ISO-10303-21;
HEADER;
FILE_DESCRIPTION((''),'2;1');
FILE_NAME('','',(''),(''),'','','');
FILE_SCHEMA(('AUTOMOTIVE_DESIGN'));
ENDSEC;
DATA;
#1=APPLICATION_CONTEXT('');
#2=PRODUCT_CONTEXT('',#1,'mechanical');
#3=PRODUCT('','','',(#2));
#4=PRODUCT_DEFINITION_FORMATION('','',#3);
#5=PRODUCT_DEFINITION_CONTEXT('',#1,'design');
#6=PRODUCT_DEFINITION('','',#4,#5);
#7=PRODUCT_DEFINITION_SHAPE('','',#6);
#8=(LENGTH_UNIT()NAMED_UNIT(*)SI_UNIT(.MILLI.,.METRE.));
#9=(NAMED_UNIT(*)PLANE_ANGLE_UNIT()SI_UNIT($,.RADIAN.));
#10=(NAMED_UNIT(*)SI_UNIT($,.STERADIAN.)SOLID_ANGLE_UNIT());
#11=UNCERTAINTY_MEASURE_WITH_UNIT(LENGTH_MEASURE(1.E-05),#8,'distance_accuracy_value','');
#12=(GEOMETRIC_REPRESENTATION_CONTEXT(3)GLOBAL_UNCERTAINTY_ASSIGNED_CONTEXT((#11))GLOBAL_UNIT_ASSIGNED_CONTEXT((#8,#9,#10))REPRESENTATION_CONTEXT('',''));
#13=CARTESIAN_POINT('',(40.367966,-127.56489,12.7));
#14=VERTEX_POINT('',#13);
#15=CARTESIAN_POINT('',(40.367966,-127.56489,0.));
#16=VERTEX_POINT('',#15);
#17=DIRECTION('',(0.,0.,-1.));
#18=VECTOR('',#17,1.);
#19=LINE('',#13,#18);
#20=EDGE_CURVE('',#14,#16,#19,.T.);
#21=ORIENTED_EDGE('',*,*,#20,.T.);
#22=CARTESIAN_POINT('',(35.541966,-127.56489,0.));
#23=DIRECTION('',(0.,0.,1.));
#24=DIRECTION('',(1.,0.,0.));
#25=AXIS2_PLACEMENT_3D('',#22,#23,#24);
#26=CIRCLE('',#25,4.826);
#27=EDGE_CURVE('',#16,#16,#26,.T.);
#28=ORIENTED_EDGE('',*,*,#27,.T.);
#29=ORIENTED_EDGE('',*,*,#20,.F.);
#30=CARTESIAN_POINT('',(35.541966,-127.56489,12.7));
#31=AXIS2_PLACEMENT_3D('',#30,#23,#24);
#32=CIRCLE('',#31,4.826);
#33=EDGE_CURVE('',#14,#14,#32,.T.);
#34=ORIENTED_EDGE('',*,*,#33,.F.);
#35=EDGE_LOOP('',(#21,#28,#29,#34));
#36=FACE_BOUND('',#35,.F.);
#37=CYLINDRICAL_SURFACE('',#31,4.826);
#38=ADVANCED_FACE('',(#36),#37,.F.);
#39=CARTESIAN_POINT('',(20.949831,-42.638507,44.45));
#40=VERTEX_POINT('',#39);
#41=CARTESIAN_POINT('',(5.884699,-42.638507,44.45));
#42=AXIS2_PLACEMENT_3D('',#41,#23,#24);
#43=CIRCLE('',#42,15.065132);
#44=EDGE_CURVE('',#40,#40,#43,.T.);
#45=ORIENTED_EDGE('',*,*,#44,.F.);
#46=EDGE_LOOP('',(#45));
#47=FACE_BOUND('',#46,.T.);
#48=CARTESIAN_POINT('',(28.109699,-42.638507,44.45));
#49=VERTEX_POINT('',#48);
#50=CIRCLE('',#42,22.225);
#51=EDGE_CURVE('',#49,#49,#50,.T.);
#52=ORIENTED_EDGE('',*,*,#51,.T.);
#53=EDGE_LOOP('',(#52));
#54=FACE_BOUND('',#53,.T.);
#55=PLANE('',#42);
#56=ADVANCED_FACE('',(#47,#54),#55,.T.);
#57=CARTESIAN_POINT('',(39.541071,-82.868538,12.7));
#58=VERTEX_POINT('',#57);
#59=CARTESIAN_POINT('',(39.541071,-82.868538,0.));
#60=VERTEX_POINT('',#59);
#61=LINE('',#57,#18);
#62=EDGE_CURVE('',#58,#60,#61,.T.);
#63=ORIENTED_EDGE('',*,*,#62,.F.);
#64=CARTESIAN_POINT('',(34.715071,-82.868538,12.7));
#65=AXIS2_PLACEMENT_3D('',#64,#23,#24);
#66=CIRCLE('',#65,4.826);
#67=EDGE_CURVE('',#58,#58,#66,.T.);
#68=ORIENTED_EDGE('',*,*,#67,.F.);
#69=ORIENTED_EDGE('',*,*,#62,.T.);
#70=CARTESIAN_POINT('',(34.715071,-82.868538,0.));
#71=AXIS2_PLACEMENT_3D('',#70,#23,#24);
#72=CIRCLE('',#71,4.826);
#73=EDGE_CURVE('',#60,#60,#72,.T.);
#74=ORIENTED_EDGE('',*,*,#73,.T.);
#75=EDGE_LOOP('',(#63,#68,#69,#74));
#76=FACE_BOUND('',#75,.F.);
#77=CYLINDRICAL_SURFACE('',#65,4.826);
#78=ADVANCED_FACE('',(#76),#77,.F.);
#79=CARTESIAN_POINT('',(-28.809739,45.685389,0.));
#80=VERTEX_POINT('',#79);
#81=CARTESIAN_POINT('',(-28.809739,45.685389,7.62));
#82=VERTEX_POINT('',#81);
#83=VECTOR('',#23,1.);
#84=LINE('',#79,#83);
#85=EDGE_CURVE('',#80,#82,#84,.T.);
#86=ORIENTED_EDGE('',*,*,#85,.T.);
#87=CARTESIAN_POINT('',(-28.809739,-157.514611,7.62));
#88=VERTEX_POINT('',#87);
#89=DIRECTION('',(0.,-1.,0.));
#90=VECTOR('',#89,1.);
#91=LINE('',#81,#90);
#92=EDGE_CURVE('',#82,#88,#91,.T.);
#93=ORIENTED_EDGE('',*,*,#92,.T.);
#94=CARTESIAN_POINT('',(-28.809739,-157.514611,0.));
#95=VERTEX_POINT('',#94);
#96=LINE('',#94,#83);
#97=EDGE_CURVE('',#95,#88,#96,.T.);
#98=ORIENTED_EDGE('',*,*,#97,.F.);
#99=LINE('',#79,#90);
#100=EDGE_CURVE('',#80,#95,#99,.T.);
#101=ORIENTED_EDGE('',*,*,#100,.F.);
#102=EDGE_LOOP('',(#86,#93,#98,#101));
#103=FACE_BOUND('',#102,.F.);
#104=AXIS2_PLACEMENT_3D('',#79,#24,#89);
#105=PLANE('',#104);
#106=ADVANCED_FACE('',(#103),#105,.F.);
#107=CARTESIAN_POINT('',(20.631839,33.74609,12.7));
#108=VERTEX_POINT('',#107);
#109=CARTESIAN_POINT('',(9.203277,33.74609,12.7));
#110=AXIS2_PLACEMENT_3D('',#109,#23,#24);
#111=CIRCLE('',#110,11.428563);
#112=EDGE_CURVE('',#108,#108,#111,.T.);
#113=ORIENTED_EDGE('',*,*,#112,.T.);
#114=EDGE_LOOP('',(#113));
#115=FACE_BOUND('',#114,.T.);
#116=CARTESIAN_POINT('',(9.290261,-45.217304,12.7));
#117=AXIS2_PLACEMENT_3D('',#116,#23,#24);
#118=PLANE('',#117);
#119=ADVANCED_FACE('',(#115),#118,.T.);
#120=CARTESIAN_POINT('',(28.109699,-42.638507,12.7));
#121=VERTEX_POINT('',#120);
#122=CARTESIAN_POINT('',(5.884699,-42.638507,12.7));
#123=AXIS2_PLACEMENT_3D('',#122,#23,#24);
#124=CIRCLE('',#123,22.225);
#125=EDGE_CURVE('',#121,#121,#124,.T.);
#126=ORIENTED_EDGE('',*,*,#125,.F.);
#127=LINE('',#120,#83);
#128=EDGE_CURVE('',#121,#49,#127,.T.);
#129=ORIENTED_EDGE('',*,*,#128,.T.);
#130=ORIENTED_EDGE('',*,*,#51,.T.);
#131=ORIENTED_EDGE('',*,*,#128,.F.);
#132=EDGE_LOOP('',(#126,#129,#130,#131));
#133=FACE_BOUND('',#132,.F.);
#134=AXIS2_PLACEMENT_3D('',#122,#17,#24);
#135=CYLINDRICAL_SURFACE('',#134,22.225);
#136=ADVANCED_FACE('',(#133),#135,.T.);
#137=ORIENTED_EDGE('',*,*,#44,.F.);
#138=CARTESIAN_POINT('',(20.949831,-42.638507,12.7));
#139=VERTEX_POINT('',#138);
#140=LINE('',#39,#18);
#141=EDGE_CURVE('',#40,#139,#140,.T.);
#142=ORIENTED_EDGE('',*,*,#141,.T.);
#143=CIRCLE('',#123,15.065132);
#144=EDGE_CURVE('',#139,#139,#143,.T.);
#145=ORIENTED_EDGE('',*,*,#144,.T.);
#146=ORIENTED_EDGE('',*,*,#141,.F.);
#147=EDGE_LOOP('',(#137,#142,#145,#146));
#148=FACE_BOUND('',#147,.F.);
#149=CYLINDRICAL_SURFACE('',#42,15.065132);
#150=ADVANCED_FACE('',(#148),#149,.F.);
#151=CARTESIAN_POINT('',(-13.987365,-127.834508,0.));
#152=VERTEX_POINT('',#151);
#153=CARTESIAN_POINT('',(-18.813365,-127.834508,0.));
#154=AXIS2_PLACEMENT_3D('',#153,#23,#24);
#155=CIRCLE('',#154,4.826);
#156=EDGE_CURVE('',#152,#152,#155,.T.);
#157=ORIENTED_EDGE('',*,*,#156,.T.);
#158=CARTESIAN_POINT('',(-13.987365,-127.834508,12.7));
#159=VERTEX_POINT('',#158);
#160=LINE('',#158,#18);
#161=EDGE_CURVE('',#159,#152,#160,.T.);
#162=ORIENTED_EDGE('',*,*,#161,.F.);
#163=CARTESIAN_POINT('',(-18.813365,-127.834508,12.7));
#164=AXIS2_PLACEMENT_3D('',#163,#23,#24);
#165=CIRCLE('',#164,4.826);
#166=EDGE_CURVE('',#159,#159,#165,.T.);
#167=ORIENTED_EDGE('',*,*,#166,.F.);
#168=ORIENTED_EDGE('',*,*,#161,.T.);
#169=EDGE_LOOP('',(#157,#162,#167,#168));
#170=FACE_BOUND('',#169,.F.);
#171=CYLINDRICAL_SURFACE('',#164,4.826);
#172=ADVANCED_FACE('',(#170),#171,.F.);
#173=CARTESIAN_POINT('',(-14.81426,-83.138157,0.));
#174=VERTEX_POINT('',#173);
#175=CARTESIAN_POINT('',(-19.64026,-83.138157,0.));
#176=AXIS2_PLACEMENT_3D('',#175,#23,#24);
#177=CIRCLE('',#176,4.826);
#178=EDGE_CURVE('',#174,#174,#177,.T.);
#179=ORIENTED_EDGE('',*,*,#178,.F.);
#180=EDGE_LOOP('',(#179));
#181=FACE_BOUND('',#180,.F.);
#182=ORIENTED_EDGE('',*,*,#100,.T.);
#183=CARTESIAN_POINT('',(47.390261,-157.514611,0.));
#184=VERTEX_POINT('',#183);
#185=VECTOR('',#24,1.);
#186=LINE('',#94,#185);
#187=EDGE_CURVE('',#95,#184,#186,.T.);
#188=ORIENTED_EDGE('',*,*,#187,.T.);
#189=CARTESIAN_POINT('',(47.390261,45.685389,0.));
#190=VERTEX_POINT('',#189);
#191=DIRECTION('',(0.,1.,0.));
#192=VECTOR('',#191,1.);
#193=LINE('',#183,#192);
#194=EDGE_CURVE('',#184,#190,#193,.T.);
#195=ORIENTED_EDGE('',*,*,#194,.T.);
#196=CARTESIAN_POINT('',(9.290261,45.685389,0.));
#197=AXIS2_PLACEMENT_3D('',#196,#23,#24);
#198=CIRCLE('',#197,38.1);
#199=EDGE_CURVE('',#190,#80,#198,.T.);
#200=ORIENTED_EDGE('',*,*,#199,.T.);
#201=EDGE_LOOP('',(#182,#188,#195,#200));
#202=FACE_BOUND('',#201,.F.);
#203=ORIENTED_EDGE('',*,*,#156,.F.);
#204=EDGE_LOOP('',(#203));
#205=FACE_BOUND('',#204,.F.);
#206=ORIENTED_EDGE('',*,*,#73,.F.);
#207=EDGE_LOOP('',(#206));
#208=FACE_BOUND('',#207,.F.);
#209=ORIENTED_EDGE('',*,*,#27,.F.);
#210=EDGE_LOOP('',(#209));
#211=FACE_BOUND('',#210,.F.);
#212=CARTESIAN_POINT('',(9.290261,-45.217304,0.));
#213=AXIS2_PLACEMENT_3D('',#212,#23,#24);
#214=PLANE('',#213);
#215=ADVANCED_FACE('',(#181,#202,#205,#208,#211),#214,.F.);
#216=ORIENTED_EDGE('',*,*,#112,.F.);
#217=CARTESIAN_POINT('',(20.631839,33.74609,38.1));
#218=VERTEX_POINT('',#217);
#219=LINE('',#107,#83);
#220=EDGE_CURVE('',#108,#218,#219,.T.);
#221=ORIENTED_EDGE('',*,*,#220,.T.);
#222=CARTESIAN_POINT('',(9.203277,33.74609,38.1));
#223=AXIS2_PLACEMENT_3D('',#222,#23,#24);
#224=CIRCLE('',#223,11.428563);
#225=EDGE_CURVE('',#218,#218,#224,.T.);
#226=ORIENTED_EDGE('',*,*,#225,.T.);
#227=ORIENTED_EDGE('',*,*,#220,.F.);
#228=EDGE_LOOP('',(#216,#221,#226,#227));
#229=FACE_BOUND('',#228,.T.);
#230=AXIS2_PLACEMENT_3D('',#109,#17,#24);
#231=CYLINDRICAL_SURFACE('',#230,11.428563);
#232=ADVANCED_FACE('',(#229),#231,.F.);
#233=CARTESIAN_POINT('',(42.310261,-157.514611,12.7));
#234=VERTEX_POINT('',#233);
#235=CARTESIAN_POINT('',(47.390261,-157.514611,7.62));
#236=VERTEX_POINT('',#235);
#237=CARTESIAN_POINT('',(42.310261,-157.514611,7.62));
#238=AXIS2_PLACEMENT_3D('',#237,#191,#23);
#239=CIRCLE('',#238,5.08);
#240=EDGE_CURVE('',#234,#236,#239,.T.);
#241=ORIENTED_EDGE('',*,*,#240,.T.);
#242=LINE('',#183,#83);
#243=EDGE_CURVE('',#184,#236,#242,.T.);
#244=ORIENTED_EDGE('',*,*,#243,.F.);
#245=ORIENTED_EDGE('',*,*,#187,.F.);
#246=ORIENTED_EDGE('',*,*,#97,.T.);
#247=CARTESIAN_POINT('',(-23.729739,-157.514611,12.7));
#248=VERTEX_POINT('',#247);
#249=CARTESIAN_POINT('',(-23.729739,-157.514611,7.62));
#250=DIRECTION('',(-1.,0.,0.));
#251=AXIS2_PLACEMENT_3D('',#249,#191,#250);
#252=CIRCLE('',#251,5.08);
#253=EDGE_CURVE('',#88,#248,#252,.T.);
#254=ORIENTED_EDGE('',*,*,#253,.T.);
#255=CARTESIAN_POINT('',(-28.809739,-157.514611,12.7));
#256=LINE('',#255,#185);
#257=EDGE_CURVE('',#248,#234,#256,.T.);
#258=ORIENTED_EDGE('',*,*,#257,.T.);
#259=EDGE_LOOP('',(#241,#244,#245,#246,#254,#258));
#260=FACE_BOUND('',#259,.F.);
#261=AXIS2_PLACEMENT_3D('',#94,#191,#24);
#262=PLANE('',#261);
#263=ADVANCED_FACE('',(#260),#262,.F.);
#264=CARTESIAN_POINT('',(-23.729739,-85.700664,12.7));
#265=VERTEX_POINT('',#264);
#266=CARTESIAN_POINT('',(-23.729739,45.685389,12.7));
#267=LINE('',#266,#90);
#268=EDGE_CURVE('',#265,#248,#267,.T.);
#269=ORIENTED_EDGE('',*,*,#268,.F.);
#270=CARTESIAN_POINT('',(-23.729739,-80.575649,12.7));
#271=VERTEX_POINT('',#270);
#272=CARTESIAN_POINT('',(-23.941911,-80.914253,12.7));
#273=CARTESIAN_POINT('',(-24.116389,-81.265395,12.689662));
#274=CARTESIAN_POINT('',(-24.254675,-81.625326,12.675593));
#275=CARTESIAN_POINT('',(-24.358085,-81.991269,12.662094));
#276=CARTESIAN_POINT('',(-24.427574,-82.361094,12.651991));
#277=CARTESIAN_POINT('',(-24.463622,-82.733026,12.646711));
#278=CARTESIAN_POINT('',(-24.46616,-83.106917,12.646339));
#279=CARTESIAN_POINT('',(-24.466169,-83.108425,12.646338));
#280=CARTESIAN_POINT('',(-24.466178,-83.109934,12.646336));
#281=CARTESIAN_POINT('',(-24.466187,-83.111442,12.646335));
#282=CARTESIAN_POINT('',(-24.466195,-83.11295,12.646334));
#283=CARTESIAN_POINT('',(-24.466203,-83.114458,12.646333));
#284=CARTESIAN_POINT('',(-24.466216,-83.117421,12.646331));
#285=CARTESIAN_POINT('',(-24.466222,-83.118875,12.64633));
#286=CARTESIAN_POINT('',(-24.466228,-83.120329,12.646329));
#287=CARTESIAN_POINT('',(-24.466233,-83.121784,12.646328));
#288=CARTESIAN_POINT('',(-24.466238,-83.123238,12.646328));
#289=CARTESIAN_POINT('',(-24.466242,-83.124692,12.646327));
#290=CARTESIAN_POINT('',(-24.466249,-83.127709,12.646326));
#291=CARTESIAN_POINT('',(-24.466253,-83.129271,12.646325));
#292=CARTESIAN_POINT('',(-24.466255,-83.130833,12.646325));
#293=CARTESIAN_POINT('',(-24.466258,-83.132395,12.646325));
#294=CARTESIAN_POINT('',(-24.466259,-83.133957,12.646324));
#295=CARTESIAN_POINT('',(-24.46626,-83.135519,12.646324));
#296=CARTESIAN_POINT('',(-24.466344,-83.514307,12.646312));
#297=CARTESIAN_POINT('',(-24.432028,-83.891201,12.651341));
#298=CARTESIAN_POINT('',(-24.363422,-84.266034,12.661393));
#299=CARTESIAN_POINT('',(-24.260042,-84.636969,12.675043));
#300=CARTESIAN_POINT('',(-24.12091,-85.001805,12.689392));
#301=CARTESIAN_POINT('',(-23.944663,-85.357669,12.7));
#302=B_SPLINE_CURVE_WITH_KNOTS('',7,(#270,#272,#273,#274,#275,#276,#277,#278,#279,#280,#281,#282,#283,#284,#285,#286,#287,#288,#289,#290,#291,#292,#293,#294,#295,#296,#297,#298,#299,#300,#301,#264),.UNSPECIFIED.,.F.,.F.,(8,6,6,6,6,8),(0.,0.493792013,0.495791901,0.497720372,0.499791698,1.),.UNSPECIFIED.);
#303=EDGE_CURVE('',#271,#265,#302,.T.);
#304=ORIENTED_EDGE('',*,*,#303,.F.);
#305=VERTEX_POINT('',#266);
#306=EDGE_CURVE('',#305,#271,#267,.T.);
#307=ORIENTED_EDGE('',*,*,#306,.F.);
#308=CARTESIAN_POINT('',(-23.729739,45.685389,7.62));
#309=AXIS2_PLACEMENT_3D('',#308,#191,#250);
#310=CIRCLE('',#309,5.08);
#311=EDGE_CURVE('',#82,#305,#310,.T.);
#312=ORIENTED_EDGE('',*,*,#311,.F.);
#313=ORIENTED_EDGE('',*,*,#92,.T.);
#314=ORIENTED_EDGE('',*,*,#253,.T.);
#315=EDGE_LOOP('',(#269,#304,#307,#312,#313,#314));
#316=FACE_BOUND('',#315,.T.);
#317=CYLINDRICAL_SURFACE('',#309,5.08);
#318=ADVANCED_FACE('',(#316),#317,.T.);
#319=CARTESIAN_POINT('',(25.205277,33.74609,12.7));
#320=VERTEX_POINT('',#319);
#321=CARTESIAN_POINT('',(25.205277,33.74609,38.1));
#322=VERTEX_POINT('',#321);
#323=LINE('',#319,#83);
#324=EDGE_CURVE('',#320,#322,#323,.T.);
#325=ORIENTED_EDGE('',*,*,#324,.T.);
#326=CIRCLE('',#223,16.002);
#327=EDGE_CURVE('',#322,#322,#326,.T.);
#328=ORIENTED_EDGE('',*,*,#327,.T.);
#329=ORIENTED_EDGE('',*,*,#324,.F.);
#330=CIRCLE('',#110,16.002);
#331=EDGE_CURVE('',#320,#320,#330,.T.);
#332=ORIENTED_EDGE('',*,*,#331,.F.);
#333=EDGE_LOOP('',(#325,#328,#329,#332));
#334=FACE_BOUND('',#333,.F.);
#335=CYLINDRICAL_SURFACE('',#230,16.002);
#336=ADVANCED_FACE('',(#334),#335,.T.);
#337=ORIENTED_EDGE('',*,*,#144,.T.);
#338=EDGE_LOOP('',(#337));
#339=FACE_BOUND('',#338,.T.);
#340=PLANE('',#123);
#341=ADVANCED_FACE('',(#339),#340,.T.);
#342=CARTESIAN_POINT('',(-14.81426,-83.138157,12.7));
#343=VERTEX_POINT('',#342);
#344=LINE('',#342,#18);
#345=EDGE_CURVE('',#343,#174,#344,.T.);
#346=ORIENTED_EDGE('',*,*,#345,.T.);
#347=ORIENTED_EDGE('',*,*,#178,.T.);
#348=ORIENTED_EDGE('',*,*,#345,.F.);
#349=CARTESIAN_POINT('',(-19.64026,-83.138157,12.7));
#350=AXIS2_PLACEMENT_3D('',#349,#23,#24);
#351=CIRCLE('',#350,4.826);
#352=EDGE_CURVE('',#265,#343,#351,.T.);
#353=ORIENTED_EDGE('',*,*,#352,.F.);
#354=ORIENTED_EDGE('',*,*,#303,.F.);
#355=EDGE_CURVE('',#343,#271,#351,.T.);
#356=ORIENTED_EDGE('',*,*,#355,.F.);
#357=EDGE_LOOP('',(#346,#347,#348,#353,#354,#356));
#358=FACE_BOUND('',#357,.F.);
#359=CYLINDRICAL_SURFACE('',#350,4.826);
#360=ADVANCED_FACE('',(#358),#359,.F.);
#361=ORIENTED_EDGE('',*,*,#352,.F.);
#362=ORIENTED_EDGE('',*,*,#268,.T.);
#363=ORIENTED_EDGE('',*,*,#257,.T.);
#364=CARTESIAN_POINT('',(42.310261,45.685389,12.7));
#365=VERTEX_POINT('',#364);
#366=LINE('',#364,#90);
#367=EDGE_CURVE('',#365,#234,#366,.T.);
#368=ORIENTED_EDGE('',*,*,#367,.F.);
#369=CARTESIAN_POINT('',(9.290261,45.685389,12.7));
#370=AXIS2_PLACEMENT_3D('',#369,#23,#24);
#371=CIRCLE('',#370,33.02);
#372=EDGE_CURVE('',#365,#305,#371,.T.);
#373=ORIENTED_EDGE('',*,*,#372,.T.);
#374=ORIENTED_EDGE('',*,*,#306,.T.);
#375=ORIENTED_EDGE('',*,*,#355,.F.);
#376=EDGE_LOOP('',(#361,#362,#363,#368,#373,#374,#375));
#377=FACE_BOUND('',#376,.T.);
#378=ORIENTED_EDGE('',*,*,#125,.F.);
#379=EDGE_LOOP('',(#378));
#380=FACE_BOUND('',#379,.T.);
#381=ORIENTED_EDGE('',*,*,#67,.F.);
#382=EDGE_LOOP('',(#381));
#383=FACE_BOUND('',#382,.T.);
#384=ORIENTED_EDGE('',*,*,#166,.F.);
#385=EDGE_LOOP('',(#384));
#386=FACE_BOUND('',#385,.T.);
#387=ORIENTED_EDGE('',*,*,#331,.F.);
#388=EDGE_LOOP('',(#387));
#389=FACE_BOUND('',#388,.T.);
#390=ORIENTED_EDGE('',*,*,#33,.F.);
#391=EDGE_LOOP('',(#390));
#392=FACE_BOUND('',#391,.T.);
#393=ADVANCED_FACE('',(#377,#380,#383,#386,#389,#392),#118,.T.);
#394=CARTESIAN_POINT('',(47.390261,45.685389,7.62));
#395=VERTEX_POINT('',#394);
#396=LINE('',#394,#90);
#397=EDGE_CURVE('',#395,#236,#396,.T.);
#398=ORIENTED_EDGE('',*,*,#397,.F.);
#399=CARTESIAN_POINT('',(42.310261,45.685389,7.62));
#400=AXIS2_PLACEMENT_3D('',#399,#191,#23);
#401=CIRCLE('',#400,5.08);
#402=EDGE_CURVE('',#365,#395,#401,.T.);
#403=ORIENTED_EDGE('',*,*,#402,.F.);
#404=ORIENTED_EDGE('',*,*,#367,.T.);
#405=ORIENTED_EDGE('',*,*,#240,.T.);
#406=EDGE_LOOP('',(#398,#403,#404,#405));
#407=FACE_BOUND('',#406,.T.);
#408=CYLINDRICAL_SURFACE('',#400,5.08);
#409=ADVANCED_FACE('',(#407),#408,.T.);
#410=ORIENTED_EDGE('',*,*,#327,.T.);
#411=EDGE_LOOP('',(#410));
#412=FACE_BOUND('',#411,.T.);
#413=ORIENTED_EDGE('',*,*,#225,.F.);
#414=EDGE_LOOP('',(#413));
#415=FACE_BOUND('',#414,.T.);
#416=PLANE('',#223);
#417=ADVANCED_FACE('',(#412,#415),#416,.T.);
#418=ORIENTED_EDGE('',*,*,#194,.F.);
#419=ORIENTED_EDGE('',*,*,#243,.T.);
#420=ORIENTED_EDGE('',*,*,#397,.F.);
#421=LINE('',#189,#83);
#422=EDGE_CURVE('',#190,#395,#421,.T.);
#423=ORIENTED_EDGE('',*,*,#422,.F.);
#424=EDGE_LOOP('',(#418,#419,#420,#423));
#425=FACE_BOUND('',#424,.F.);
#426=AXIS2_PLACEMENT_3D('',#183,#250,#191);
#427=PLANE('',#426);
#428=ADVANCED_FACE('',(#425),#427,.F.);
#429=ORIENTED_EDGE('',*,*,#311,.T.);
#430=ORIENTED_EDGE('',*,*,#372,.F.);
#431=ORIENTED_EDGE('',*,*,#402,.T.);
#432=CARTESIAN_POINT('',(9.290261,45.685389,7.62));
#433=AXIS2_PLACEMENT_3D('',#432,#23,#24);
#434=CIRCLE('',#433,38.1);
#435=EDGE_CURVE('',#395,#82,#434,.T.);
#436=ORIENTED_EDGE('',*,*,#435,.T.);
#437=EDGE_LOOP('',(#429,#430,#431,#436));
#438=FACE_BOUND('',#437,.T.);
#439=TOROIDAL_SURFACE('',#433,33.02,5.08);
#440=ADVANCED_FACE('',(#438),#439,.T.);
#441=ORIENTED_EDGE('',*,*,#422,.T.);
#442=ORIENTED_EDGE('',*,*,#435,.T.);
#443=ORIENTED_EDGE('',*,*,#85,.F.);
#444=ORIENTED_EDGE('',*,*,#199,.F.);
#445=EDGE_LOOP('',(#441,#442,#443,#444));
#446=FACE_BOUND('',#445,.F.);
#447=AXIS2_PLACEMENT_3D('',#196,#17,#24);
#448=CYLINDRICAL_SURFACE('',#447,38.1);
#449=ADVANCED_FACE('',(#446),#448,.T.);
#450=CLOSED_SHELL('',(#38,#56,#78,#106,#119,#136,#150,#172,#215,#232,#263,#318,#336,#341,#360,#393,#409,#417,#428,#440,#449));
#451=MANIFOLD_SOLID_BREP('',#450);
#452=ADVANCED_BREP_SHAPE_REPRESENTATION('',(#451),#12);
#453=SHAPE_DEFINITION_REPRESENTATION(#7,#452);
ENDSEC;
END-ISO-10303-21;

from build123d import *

# Parameters (mm, degrees)
F1_DEPTH     = 12.7
F2_R         = 4.826
F3_DEPTH     = 12.701
F4_R         = 22.225
F5_DEPTH     = 31.75
F6_R         = 16.002
F6_R_2       = 11.4285628251
F7_DEPTH     = 25.4
F8_R         = 15.0651318588
F9_DEPTH     = 31.75
F10_T1_DEPTH = 215.9
F10_T4_ANGLE = 180


# Not quite as in the source:
# - a fillet or chamfer that OpenCascade refuses, or shapes differently, is made with other operations: its cross-section is extruded or revolved along the edge and cut away or added


with BuildPart() as f1:
    # F0 (on Top) → F1 (new body)
    with BuildSketch(Plane.XY):
        with BuildLine():
            Line((-28.8097388059, 45.6853893078), (-28.8097388059, -157.5146106922))
            Line((-28.8097388059, -157.5146106922), (47.3902611941, -157.5146106922))
            Line((47.3902611941, -157.5146106922), (47.3902611941, 45.6853893078))
            ThreePointArc((47.3902611941, 45.6853893078), (9.2902611941, 83.7853893078), (-28.8097388059, 45.6853893078))
        make_face()
    extrude(amount=F1_DEPTH)

    # F2 (on face) → F3 (cut, through all)
    with BuildSketch(Plane.XY.offset(12.7)):
        with Locations((-18.8133654982, -127.8345082872)):
            Circle(F2_R)
        with Locations((35.5419658125, -127.5648898334)):
            Circle(F2_R)
        with Locations((-19.6402604571, -83.1381565264)):
            Circle(F2_R)
        with Locations((34.7150708535, -82.8685380725)):
            Circle(F2_R)
    extrude(amount=-F3_DEPTH, mode=Mode.SUBTRACT)

    # F4 (on face) → F5 (join)
    with BuildSketch(Plane.XY.offset(12.7)):
        with Locations((5.8846990578, -42.6385067403)):
            Circle(F4_R)
    extrude(amount=F5_DEPTH)

    # F6 (on face) → F7 (join)
    with BuildSketch(Plane.XY.offset(12.7)):
        with Locations((9.203276597, 33.7460897863)):
            Circle(F6_R)
        with Locations((9.203276597, 33.7460897863)):
            Circle(F6_R_2, mode=Mode.SUBTRACT)
    extrude(amount=F7_DEPTH)

    # F8 (on face) → F9 (cut)
    with BuildSketch(Plane.XY.offset(44.45)):
        with Locations((5.8846990578, -42.6385067403)):
            Circle(F8_R)
    extrude(amount=-F9_DEPTH, mode=Mode.SUBTRACT)

    # F10: fillet of radius 5.08 on 3 edges, made by hand

    # F10_s2 → F10_t1 (cut)
    with BuildSketch(Plane.XZ.offset(-45.6853893078)):
        with BuildLine():
            ThreePointArc((42.3102611941, 12.7), (45.9023636425, 11.2121024484), (47.3902611941, 7.62))
            Line((47.3902611941, 7.62), (47.3902611941, 12.7))
            Line((47.3902611941, 12.7), (42.3102611941, 12.7))
        make_face()
        with BuildLine():
            ThreePointArc((-28.8097388059, 7.62), (-27.3218412543, 11.2121024484), (-23.7297388059, 12.7))
            Line((-23.7297388059, 12.7), (-28.8097388059, 12.7))
            Line((-28.8097388059, 12.7), (-28.8097388059, 7.62))
        make_face()
    extrude(amount=F10_T1_DEPTH, mode=Mode.SUBTRACT)

    # F10_s3 → F10_t4 (revolve, cut)
    with BuildSketch(Plane.XZ.offset(-45.6853893078)):
        with BuildLine():
            ThreePointArc((47.3902611941, 7.62), (45.9023636425, 11.2121024484), (42.3102611941, 12.7))
            Line((42.3102611941, 12.7), (47.3902611941, 12.7))
            Line((47.3902611941, 12.7), (47.3902611941, 7.62))
        make_face()
    revolve(axis=Axis((9.2902611941, 45.6853893078, 12.7), (0, 0, 1)), revolution_arc=F10_T4_ANGLE, mode=Mode.SUBTRACT)


solid = f1.part
